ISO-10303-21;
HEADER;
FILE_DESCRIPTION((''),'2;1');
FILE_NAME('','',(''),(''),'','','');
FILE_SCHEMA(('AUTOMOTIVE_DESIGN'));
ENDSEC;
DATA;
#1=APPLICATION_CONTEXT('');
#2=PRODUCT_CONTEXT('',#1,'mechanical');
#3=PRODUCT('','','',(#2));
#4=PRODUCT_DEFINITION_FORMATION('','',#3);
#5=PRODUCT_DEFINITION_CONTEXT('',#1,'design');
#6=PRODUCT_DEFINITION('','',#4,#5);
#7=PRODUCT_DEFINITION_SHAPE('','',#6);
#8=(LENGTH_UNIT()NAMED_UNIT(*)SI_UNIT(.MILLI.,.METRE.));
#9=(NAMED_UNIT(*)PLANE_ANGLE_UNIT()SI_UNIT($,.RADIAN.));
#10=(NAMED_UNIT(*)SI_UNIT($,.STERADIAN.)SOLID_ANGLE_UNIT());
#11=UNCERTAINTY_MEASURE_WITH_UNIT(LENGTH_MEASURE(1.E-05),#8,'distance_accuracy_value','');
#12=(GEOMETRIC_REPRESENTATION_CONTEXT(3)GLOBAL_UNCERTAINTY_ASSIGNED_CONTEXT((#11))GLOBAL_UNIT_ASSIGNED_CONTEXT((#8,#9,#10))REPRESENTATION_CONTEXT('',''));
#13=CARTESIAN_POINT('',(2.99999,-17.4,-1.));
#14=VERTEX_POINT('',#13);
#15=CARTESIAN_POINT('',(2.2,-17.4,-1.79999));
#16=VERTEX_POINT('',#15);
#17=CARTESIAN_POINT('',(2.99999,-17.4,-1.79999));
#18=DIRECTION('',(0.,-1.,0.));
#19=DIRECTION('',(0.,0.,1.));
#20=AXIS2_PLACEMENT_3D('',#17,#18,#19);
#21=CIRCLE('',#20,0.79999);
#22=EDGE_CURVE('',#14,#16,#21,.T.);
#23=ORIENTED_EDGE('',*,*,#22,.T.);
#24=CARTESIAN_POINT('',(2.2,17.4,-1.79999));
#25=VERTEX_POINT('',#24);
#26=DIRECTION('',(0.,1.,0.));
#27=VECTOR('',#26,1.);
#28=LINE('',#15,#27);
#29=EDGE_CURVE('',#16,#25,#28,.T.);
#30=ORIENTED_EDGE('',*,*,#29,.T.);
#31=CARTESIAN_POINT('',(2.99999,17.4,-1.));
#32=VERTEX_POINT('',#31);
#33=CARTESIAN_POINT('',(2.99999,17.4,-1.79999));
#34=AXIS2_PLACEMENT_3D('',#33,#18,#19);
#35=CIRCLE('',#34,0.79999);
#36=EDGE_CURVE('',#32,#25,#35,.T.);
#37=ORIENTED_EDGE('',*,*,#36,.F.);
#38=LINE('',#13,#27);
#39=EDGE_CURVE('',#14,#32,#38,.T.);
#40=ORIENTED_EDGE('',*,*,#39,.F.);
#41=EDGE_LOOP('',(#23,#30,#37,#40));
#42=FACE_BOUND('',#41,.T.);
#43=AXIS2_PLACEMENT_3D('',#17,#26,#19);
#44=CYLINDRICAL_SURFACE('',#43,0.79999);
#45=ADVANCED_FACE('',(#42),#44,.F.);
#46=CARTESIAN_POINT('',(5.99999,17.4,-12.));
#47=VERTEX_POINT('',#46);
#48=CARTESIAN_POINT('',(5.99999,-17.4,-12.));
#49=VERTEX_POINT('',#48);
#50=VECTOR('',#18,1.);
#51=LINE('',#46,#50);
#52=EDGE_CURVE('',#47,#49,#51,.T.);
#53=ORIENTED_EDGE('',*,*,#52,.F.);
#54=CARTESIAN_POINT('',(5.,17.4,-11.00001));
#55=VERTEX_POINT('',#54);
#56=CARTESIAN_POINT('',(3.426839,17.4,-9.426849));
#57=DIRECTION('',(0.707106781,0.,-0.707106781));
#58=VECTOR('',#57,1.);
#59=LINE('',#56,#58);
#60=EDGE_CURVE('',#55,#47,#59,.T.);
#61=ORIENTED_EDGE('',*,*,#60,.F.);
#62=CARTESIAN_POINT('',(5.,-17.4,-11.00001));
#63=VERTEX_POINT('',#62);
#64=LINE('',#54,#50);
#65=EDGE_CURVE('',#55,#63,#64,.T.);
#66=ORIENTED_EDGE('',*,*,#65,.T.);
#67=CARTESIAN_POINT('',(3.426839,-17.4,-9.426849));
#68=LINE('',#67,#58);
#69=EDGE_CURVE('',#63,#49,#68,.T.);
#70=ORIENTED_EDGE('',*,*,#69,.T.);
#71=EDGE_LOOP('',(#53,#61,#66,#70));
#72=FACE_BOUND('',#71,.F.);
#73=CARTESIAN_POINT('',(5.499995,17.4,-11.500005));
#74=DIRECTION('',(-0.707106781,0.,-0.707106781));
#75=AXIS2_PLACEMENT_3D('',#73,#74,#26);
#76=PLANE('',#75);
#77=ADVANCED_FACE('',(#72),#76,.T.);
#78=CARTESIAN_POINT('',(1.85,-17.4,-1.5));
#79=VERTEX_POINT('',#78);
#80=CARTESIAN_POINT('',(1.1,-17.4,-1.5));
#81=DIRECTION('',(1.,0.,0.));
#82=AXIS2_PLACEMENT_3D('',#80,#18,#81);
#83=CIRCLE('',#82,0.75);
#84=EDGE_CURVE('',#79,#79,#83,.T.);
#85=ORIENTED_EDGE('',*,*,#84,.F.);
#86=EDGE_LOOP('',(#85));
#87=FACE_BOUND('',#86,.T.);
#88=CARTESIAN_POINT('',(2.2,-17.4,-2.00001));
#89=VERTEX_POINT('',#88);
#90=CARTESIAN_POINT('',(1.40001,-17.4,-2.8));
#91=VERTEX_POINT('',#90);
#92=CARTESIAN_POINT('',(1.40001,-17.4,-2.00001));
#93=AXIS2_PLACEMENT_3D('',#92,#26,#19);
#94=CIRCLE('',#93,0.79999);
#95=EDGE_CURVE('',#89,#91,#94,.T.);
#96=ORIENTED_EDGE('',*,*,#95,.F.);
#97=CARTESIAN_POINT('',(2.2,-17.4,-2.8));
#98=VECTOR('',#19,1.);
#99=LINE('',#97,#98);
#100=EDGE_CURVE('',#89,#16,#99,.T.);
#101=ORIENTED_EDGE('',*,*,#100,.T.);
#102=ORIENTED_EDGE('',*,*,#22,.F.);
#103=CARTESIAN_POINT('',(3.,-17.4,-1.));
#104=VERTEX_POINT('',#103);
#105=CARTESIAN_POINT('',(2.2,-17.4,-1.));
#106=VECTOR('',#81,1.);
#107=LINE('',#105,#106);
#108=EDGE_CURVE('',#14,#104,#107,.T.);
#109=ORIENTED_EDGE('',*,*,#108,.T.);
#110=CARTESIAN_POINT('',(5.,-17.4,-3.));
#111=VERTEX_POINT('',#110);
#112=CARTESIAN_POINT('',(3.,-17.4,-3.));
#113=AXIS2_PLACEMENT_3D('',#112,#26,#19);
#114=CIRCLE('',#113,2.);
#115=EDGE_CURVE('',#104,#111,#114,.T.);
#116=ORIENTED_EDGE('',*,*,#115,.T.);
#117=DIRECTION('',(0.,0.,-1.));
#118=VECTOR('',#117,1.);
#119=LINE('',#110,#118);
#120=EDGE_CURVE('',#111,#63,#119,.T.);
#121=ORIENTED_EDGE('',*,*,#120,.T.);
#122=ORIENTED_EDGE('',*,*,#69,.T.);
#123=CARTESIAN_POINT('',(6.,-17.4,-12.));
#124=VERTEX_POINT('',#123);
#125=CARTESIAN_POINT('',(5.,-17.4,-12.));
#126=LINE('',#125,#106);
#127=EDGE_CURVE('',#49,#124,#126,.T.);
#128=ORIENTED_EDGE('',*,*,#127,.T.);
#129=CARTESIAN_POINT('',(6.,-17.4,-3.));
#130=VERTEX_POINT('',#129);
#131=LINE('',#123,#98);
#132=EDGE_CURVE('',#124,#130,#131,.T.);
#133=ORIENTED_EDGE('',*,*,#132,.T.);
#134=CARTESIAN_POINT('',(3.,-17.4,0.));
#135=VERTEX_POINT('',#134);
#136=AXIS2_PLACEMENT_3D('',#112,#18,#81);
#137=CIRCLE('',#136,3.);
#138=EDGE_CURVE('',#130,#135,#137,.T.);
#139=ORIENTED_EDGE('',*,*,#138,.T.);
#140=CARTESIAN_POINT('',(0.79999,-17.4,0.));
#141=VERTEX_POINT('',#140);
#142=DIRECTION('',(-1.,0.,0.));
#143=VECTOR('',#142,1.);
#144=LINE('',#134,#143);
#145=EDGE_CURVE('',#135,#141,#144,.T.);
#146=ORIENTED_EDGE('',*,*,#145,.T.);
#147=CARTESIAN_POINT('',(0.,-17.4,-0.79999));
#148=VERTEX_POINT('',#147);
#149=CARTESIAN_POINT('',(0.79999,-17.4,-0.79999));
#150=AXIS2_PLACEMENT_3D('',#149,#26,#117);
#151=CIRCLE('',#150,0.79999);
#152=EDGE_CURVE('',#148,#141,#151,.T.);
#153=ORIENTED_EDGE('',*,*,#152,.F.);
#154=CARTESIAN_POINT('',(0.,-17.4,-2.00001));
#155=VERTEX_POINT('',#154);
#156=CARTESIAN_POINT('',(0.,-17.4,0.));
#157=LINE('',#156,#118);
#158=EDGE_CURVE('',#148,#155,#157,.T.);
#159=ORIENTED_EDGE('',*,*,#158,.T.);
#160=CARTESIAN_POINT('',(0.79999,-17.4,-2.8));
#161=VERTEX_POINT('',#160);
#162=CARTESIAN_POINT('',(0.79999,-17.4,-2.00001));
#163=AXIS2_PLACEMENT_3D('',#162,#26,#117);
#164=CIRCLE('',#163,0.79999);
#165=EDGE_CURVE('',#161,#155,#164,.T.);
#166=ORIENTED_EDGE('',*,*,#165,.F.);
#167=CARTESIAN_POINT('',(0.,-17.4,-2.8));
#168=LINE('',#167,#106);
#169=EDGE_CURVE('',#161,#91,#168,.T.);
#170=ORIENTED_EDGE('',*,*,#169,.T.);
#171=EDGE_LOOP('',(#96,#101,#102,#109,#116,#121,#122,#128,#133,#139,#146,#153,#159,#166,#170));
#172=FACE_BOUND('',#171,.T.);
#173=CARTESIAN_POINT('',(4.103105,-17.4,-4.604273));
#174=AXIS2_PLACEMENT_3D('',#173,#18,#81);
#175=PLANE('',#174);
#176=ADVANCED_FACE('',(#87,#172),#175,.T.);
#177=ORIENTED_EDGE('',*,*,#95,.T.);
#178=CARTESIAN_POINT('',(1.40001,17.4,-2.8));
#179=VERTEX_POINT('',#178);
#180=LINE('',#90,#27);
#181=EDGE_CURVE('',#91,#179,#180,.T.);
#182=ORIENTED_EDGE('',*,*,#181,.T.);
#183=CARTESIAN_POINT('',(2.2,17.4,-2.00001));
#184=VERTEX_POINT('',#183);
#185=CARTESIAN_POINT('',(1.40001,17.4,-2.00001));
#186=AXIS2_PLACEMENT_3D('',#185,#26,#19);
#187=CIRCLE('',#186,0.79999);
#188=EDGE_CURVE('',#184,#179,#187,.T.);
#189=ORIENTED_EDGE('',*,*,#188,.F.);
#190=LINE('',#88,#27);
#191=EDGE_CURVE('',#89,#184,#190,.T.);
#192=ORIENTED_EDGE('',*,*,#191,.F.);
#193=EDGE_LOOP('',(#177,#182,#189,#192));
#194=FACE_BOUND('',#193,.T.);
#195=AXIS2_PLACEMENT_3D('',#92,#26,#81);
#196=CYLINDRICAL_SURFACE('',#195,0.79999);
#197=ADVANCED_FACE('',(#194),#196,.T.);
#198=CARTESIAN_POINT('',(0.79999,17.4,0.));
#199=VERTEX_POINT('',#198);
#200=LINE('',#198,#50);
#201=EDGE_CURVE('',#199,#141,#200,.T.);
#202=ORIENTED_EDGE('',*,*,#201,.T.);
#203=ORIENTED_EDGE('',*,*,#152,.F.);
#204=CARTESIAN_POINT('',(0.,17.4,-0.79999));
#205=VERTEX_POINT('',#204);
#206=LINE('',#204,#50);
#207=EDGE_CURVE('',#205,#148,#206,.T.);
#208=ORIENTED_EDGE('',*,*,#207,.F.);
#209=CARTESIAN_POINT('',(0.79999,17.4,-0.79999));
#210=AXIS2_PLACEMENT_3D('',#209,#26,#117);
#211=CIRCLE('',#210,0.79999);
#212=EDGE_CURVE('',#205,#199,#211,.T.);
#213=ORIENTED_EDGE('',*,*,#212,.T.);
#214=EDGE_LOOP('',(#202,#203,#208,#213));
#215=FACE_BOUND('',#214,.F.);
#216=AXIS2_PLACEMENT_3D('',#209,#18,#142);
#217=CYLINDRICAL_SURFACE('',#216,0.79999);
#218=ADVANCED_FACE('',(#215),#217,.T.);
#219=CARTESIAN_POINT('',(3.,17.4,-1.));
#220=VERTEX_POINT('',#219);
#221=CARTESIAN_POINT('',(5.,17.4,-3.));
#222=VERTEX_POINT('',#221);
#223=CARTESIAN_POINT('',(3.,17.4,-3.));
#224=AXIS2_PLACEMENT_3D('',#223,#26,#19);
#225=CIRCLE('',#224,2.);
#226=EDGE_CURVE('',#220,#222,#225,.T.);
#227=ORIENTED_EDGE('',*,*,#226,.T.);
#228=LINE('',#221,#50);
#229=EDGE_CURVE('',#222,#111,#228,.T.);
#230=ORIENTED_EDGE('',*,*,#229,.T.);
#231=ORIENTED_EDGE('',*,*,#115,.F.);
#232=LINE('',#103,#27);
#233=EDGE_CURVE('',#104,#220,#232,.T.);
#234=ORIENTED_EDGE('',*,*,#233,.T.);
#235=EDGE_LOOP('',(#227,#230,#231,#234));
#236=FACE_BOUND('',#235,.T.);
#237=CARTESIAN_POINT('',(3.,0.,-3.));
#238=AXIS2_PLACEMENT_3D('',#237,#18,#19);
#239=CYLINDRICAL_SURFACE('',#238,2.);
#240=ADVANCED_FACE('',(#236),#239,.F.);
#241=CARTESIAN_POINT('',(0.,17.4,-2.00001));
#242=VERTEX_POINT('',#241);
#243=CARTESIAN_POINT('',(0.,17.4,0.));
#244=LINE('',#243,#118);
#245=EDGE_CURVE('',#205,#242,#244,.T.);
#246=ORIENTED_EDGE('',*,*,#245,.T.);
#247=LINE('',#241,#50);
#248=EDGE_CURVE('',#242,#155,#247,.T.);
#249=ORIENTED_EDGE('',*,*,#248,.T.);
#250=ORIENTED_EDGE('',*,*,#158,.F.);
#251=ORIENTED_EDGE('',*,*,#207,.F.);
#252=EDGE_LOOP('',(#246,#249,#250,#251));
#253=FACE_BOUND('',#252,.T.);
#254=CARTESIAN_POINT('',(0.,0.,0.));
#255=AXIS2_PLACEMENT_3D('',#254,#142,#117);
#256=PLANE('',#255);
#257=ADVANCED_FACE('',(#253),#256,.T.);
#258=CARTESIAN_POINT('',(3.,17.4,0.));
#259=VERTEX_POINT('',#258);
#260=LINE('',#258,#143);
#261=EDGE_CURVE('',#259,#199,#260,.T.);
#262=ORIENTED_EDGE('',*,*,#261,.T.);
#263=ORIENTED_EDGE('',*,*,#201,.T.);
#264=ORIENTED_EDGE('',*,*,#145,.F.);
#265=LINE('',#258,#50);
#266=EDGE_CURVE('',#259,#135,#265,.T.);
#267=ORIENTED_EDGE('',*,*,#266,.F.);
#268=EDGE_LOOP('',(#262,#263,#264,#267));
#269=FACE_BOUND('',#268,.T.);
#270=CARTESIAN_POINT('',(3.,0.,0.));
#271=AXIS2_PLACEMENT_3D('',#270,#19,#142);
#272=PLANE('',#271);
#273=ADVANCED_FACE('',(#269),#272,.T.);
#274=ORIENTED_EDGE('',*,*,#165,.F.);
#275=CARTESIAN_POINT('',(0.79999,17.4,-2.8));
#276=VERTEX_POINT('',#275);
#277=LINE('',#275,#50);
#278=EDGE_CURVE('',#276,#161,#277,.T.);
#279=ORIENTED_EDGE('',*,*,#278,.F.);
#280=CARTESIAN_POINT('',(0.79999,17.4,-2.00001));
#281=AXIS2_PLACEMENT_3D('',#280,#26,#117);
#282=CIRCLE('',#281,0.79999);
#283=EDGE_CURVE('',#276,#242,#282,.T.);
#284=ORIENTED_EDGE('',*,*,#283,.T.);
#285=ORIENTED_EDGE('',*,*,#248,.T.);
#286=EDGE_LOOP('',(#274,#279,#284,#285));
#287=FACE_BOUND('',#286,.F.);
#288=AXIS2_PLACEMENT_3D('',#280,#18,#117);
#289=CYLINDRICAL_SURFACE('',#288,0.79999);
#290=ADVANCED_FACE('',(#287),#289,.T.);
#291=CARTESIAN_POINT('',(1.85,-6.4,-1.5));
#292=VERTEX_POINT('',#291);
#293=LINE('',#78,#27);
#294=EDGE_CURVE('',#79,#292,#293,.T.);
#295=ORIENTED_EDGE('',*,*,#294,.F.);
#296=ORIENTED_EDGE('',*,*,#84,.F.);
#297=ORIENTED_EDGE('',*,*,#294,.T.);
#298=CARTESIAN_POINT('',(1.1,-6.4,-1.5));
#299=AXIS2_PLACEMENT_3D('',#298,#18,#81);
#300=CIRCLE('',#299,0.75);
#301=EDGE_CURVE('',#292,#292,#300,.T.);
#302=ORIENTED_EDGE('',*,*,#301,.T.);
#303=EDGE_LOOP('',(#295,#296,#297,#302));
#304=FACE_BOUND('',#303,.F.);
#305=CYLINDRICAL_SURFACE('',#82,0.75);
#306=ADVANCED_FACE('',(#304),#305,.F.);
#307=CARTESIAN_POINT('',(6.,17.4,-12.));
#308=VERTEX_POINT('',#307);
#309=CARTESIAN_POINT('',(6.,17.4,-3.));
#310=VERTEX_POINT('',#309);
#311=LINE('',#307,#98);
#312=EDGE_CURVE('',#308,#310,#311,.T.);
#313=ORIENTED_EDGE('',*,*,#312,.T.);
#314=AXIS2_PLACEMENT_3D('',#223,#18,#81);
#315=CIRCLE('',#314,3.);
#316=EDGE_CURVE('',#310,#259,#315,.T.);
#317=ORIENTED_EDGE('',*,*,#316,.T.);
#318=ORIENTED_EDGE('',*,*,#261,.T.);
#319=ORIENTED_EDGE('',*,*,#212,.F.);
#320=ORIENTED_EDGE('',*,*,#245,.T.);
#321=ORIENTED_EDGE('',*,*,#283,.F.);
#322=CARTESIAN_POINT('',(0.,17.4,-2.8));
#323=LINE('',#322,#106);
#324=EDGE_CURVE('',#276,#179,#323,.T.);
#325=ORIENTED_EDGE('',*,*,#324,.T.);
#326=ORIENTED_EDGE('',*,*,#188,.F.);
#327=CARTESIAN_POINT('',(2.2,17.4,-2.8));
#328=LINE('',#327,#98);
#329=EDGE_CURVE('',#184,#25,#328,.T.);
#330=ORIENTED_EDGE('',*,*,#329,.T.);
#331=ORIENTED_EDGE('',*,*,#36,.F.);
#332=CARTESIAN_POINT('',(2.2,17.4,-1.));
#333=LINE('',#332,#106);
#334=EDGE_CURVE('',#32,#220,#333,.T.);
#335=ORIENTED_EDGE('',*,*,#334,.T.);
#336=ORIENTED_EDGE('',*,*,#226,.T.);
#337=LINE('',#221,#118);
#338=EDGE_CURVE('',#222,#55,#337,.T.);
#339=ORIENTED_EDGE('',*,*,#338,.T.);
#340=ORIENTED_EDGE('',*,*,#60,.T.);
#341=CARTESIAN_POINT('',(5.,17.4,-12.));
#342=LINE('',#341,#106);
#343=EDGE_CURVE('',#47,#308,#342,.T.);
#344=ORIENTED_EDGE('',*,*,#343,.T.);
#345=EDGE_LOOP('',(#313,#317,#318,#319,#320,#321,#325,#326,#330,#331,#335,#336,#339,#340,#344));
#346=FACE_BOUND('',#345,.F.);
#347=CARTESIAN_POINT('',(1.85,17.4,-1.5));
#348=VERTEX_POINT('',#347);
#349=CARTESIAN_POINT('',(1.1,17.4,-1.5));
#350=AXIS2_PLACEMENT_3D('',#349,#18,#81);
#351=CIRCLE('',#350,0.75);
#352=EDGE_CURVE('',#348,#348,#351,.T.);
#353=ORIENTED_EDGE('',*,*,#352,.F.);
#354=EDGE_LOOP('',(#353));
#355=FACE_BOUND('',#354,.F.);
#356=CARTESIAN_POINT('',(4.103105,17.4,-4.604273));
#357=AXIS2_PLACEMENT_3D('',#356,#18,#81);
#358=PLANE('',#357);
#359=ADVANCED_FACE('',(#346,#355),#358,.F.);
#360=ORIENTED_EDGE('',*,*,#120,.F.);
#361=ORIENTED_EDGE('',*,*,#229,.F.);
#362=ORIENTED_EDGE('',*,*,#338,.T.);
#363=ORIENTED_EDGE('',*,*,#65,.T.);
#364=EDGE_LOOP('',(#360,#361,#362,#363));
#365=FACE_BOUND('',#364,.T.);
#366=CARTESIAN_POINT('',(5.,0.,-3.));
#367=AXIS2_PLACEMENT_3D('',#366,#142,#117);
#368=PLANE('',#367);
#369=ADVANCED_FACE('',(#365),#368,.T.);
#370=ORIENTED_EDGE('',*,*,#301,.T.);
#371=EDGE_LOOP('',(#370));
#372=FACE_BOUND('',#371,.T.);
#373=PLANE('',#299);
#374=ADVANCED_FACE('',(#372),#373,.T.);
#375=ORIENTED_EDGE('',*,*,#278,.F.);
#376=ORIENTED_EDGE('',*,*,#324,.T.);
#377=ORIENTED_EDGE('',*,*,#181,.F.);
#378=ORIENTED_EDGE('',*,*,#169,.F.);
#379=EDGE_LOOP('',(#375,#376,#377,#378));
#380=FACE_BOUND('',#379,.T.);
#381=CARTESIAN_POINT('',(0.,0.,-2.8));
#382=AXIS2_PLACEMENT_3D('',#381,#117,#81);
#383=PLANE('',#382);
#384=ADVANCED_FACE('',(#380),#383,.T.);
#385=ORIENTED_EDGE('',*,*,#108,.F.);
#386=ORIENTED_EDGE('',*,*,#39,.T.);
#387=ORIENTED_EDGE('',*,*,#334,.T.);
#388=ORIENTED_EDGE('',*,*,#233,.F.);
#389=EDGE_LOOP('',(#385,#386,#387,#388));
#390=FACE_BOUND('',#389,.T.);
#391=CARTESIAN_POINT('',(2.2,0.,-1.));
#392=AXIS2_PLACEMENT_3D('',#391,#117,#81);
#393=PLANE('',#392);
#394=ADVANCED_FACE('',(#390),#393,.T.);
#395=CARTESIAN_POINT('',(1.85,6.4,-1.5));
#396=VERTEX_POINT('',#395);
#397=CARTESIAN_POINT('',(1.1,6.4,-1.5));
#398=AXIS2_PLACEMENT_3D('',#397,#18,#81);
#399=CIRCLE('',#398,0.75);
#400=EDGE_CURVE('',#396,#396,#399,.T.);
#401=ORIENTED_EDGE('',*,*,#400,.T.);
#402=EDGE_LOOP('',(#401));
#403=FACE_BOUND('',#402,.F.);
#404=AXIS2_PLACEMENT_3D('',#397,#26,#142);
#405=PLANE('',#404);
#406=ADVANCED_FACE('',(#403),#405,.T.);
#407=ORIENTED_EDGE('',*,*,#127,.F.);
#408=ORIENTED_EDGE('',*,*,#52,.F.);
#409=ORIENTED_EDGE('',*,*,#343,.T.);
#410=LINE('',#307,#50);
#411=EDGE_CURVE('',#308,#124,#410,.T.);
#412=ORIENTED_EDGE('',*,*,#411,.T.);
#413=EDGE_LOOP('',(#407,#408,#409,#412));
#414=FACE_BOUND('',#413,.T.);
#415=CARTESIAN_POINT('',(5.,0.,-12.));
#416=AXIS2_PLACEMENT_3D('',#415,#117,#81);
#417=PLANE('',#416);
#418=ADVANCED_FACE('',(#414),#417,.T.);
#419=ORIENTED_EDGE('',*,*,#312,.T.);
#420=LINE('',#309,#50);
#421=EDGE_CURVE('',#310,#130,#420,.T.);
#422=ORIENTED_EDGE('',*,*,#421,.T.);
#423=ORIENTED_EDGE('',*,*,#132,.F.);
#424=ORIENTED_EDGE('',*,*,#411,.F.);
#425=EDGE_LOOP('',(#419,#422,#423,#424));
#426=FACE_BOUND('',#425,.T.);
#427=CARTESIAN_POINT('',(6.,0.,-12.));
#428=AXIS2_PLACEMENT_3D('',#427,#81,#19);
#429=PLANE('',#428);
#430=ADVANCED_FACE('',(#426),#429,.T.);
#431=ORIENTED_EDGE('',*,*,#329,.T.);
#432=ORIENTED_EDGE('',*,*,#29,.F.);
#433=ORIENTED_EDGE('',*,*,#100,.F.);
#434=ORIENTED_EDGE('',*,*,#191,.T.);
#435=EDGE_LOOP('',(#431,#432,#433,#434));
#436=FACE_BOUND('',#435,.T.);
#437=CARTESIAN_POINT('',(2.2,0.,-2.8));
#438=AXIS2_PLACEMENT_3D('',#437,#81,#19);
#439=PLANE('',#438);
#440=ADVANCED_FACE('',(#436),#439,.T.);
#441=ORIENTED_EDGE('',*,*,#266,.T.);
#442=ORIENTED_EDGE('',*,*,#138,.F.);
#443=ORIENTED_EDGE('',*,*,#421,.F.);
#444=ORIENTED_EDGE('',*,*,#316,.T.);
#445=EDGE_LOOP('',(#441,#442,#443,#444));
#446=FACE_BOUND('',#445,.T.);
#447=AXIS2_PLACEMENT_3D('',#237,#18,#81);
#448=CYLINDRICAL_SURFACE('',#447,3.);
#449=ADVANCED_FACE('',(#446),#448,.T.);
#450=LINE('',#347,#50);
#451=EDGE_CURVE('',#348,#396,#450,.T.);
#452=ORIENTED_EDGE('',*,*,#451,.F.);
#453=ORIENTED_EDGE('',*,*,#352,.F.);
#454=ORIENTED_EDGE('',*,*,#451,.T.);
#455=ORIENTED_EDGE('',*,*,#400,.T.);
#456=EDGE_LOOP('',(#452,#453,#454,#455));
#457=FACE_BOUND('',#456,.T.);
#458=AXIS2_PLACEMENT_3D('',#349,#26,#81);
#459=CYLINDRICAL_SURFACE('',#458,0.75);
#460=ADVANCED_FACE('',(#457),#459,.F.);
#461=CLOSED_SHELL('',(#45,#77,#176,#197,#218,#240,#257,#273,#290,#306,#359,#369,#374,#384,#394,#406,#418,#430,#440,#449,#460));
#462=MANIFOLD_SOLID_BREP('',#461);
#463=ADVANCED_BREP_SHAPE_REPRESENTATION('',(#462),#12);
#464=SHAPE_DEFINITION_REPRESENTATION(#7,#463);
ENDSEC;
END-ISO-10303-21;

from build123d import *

# Parameters (mm, degrees)
F1_DEPTH = 17.4
F2_R     = 0.75
F3_DEPTH = 11
F4_R     = 0.79999
F5_SIZE  = 0.99999


# Not quite as in the source:
# - a fillet or chamfer is up to 0.001 mm smaller than in the source, because OpenCascade refuses the exact size
# - a pattern or mirror of a feature is missing from the dataset's text; its kind, count and spacing are read off the source's solid


with BuildPart() as f1:
    # F0 (on Front) → F1 (new body, symmetric)
    with BuildSketch(Plane.XZ):
        with BuildLine():
            ThreePointArc((3, -1), (4.4142135624, -1.5857864376), (5, -3))
            Line((5, -3), (5, -12))
            Line((5, -12), (6, -12))
            Line((6, -12), (6, -3))
            ThreePointArc((6, -3), (5.1213203436, -0.8786796564), (3, 0))
            Line((3, 0), (0, 0))
            Line((0, 0), (0, -2.8))
            Line((0, -2.8), (2.2, -2.8))
            Line((2.2, -2.8), (2.2, -1))
            Line((2.2, -1), (3, -1))
        make_face()
    extrude(amount=F1_DEPTH, both=True)

    # F2 (on face) → F3 (cut)
    with BuildSketch(Plane.XZ.offset(17.4)):
        with Locations((1.1, -1.5)):
            Circle(F2_R)
    f3 = extrude(amount=-F3_DEPTH, mode=Mode.SUBTRACT)

    # F3_copies: F3 across plane
    add(f3.mirror(Plane.ZX), mode=Mode.SUBTRACT)

    # F4 (radius 0.8 in the source; OpenCascade refuses exactly that, so slightly less here)
    f4_edges = [f1.edges().sort_by_distance(p)[0] for p in [
        (2.2, 0, -1),
        (2.2, 0, -2.8),
        (0, 0, -2.8),
        (0, 0, 0),
    ]]
    fillet(f4_edges, radius=F4_R)

    # F5 (size 1 in the source; OpenCascade refuses exactly that, so slightly less here)
    f5_edges = [f1.edges().sort_by_distance(p)[0] for p in [
        (5, 0, -12),
    ]]
    chamfer(f5_edges, length=F5_SIZE)


solid = f1.part
